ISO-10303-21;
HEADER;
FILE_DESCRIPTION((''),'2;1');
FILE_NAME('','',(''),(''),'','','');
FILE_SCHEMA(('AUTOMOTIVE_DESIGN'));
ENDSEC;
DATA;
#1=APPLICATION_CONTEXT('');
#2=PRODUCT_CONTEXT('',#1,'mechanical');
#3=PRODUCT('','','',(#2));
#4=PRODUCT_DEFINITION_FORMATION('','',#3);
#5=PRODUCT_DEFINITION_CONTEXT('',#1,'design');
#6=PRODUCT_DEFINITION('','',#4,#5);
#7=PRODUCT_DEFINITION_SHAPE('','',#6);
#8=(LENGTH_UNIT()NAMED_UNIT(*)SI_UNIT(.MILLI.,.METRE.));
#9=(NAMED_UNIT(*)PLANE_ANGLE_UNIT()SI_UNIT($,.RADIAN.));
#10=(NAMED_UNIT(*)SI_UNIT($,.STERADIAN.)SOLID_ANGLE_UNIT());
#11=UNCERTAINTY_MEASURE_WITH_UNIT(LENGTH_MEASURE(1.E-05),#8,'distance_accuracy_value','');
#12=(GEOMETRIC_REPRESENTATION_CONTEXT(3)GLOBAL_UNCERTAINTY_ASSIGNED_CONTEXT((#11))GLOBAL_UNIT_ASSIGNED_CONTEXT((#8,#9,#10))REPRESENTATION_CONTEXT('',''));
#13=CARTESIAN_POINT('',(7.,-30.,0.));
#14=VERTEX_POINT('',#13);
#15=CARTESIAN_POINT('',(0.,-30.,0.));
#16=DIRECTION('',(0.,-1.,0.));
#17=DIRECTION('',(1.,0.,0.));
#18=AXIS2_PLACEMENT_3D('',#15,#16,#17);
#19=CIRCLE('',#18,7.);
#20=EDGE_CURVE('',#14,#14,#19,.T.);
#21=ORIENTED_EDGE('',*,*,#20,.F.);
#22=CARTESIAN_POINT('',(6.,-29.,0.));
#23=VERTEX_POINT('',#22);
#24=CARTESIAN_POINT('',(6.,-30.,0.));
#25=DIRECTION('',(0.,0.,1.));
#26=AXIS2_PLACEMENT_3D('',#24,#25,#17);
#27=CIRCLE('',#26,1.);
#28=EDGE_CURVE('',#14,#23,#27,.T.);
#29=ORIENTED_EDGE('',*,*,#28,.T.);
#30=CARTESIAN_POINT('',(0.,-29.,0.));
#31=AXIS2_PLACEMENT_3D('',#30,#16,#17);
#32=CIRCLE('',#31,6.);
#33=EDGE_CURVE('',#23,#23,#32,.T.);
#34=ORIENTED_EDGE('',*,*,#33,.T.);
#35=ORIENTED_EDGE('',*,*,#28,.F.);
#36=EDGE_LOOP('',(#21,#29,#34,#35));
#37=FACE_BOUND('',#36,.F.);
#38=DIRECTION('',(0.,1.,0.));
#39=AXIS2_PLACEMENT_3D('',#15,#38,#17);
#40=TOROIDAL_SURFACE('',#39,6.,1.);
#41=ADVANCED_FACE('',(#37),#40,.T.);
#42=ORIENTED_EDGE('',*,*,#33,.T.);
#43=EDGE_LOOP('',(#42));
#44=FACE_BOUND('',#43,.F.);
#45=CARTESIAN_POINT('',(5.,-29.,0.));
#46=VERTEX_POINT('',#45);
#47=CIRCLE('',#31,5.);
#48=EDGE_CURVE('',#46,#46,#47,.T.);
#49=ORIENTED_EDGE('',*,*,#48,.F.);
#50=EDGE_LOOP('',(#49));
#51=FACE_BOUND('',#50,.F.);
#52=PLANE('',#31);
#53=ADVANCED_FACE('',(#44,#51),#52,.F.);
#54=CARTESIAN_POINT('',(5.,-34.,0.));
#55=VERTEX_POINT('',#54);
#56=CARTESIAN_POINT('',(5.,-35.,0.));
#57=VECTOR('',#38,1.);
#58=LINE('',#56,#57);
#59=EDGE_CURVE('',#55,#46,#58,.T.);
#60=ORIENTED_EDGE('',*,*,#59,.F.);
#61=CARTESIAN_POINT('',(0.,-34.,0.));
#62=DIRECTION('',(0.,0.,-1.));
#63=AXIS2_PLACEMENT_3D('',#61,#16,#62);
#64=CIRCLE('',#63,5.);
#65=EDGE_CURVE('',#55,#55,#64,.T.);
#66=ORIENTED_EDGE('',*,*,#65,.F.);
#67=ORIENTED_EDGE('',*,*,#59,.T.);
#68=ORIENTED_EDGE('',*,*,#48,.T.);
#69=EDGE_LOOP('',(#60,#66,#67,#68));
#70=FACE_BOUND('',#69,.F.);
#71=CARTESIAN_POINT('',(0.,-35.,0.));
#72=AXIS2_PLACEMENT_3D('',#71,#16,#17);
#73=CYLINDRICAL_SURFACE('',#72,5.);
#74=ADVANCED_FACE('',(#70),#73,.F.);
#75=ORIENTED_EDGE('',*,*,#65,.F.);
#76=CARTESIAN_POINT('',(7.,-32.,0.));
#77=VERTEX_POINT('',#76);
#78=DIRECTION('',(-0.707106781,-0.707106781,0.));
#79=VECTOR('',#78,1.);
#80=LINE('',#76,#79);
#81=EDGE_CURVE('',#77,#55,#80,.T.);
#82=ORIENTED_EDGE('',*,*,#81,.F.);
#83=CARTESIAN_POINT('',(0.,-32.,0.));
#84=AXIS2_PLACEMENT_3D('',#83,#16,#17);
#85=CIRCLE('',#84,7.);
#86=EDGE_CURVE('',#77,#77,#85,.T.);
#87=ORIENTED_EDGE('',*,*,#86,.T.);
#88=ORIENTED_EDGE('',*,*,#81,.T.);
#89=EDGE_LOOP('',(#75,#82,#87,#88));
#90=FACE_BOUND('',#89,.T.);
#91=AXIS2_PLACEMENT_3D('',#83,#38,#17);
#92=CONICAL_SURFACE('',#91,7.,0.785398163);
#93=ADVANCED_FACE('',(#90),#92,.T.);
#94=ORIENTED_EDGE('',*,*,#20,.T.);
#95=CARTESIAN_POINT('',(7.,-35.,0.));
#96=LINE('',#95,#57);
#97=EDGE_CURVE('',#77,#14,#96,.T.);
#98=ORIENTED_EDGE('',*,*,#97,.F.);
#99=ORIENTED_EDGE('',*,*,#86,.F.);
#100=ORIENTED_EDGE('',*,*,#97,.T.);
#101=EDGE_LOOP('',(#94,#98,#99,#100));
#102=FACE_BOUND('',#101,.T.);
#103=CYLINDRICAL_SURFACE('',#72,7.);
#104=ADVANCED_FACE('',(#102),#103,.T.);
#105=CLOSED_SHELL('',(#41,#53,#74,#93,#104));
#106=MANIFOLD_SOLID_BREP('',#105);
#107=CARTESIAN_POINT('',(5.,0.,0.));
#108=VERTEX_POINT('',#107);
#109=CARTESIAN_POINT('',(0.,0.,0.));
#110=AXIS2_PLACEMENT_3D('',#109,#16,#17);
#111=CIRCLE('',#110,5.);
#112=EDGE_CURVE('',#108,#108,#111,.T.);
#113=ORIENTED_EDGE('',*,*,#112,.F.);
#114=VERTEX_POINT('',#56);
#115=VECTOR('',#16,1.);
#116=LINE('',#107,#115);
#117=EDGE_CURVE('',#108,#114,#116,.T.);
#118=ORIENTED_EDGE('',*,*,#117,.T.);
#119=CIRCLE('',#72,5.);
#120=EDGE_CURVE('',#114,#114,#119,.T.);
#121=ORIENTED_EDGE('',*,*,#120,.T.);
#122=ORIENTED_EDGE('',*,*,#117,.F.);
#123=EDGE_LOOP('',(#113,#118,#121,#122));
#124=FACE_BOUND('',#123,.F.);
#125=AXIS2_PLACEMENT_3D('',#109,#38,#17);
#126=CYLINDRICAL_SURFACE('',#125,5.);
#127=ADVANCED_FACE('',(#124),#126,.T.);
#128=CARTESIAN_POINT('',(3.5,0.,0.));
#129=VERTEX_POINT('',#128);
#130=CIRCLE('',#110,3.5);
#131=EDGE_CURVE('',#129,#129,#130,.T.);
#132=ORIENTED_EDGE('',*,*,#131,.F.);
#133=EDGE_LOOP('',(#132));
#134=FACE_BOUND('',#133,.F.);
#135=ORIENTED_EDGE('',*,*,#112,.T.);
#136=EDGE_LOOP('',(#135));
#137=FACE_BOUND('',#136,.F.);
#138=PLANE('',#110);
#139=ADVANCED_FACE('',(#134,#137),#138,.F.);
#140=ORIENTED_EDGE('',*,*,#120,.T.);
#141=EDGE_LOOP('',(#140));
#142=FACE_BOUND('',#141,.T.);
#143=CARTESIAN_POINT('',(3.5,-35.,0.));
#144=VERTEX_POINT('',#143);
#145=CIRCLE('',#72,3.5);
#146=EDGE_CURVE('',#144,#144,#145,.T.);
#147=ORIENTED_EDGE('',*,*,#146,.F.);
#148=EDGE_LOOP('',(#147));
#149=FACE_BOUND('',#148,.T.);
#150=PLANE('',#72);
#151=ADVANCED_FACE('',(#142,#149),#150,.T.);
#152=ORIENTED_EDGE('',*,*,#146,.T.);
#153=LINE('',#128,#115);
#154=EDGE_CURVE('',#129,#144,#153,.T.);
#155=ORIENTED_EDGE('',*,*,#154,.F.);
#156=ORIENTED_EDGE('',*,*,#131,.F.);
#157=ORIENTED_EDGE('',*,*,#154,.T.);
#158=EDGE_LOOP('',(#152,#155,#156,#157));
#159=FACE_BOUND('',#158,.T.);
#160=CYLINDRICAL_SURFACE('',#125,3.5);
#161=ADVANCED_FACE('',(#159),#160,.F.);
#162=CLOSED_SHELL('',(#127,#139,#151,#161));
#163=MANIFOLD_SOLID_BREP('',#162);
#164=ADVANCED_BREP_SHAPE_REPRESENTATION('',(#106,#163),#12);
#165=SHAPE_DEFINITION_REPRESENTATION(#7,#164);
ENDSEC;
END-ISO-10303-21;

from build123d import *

# Parameters (mm, degrees)
F0_R     = 5
F0_R_2   = 3.5
F1_DEPTH = 35
F2_R     = 7
F2_R_2   = 5
F3_DEPTH = 6
F5_R     = 1


# Not quite as in the source:
# - a fillet or chamfer that OpenCascade refuses, or shapes differently, is made with other operations: its cross-section is extruded or revolved along the edge and cut away or added


with BuildPart() as f1:
    # F0 (on Front) → F1 (new body)
    with BuildSketch(Plane.XZ):
        Circle(F0_R)
        Circle(F0_R_2, mode=Mode.SUBTRACT)
    extrude(amount=F1_DEPTH)


with BuildPart() as f3:
    # F2 (on face) → F3 (new body)
    with BuildSketch(Plane.XZ.offset(35)):
        Circle(F2_R)
        Circle(F2_R_2, mode=Mode.SUBTRACT)
    extrude(amount=-F3_DEPTH)

    # F4: chamfer of 3 on 1 edges, made by hand

    # F4_s1 → F4_t2 (revolve, cut)
    with BuildSketch(Plane.XY):
        Polygon((7, -32), (4, -35), (7, -35), align=None)
    revolve(axis=Axis((0, -35, 0), (0, -1, 0)), mode=Mode.SUBTRACT)

    # F5
    f5_edges = [f3.edges().sort_by_distance(p)[0] for p in [
        (-7, -29, 0),
    ]]
    fillet(f5_edges, radius=F5_R)


solid = Compound([f1.part, f3.part])
